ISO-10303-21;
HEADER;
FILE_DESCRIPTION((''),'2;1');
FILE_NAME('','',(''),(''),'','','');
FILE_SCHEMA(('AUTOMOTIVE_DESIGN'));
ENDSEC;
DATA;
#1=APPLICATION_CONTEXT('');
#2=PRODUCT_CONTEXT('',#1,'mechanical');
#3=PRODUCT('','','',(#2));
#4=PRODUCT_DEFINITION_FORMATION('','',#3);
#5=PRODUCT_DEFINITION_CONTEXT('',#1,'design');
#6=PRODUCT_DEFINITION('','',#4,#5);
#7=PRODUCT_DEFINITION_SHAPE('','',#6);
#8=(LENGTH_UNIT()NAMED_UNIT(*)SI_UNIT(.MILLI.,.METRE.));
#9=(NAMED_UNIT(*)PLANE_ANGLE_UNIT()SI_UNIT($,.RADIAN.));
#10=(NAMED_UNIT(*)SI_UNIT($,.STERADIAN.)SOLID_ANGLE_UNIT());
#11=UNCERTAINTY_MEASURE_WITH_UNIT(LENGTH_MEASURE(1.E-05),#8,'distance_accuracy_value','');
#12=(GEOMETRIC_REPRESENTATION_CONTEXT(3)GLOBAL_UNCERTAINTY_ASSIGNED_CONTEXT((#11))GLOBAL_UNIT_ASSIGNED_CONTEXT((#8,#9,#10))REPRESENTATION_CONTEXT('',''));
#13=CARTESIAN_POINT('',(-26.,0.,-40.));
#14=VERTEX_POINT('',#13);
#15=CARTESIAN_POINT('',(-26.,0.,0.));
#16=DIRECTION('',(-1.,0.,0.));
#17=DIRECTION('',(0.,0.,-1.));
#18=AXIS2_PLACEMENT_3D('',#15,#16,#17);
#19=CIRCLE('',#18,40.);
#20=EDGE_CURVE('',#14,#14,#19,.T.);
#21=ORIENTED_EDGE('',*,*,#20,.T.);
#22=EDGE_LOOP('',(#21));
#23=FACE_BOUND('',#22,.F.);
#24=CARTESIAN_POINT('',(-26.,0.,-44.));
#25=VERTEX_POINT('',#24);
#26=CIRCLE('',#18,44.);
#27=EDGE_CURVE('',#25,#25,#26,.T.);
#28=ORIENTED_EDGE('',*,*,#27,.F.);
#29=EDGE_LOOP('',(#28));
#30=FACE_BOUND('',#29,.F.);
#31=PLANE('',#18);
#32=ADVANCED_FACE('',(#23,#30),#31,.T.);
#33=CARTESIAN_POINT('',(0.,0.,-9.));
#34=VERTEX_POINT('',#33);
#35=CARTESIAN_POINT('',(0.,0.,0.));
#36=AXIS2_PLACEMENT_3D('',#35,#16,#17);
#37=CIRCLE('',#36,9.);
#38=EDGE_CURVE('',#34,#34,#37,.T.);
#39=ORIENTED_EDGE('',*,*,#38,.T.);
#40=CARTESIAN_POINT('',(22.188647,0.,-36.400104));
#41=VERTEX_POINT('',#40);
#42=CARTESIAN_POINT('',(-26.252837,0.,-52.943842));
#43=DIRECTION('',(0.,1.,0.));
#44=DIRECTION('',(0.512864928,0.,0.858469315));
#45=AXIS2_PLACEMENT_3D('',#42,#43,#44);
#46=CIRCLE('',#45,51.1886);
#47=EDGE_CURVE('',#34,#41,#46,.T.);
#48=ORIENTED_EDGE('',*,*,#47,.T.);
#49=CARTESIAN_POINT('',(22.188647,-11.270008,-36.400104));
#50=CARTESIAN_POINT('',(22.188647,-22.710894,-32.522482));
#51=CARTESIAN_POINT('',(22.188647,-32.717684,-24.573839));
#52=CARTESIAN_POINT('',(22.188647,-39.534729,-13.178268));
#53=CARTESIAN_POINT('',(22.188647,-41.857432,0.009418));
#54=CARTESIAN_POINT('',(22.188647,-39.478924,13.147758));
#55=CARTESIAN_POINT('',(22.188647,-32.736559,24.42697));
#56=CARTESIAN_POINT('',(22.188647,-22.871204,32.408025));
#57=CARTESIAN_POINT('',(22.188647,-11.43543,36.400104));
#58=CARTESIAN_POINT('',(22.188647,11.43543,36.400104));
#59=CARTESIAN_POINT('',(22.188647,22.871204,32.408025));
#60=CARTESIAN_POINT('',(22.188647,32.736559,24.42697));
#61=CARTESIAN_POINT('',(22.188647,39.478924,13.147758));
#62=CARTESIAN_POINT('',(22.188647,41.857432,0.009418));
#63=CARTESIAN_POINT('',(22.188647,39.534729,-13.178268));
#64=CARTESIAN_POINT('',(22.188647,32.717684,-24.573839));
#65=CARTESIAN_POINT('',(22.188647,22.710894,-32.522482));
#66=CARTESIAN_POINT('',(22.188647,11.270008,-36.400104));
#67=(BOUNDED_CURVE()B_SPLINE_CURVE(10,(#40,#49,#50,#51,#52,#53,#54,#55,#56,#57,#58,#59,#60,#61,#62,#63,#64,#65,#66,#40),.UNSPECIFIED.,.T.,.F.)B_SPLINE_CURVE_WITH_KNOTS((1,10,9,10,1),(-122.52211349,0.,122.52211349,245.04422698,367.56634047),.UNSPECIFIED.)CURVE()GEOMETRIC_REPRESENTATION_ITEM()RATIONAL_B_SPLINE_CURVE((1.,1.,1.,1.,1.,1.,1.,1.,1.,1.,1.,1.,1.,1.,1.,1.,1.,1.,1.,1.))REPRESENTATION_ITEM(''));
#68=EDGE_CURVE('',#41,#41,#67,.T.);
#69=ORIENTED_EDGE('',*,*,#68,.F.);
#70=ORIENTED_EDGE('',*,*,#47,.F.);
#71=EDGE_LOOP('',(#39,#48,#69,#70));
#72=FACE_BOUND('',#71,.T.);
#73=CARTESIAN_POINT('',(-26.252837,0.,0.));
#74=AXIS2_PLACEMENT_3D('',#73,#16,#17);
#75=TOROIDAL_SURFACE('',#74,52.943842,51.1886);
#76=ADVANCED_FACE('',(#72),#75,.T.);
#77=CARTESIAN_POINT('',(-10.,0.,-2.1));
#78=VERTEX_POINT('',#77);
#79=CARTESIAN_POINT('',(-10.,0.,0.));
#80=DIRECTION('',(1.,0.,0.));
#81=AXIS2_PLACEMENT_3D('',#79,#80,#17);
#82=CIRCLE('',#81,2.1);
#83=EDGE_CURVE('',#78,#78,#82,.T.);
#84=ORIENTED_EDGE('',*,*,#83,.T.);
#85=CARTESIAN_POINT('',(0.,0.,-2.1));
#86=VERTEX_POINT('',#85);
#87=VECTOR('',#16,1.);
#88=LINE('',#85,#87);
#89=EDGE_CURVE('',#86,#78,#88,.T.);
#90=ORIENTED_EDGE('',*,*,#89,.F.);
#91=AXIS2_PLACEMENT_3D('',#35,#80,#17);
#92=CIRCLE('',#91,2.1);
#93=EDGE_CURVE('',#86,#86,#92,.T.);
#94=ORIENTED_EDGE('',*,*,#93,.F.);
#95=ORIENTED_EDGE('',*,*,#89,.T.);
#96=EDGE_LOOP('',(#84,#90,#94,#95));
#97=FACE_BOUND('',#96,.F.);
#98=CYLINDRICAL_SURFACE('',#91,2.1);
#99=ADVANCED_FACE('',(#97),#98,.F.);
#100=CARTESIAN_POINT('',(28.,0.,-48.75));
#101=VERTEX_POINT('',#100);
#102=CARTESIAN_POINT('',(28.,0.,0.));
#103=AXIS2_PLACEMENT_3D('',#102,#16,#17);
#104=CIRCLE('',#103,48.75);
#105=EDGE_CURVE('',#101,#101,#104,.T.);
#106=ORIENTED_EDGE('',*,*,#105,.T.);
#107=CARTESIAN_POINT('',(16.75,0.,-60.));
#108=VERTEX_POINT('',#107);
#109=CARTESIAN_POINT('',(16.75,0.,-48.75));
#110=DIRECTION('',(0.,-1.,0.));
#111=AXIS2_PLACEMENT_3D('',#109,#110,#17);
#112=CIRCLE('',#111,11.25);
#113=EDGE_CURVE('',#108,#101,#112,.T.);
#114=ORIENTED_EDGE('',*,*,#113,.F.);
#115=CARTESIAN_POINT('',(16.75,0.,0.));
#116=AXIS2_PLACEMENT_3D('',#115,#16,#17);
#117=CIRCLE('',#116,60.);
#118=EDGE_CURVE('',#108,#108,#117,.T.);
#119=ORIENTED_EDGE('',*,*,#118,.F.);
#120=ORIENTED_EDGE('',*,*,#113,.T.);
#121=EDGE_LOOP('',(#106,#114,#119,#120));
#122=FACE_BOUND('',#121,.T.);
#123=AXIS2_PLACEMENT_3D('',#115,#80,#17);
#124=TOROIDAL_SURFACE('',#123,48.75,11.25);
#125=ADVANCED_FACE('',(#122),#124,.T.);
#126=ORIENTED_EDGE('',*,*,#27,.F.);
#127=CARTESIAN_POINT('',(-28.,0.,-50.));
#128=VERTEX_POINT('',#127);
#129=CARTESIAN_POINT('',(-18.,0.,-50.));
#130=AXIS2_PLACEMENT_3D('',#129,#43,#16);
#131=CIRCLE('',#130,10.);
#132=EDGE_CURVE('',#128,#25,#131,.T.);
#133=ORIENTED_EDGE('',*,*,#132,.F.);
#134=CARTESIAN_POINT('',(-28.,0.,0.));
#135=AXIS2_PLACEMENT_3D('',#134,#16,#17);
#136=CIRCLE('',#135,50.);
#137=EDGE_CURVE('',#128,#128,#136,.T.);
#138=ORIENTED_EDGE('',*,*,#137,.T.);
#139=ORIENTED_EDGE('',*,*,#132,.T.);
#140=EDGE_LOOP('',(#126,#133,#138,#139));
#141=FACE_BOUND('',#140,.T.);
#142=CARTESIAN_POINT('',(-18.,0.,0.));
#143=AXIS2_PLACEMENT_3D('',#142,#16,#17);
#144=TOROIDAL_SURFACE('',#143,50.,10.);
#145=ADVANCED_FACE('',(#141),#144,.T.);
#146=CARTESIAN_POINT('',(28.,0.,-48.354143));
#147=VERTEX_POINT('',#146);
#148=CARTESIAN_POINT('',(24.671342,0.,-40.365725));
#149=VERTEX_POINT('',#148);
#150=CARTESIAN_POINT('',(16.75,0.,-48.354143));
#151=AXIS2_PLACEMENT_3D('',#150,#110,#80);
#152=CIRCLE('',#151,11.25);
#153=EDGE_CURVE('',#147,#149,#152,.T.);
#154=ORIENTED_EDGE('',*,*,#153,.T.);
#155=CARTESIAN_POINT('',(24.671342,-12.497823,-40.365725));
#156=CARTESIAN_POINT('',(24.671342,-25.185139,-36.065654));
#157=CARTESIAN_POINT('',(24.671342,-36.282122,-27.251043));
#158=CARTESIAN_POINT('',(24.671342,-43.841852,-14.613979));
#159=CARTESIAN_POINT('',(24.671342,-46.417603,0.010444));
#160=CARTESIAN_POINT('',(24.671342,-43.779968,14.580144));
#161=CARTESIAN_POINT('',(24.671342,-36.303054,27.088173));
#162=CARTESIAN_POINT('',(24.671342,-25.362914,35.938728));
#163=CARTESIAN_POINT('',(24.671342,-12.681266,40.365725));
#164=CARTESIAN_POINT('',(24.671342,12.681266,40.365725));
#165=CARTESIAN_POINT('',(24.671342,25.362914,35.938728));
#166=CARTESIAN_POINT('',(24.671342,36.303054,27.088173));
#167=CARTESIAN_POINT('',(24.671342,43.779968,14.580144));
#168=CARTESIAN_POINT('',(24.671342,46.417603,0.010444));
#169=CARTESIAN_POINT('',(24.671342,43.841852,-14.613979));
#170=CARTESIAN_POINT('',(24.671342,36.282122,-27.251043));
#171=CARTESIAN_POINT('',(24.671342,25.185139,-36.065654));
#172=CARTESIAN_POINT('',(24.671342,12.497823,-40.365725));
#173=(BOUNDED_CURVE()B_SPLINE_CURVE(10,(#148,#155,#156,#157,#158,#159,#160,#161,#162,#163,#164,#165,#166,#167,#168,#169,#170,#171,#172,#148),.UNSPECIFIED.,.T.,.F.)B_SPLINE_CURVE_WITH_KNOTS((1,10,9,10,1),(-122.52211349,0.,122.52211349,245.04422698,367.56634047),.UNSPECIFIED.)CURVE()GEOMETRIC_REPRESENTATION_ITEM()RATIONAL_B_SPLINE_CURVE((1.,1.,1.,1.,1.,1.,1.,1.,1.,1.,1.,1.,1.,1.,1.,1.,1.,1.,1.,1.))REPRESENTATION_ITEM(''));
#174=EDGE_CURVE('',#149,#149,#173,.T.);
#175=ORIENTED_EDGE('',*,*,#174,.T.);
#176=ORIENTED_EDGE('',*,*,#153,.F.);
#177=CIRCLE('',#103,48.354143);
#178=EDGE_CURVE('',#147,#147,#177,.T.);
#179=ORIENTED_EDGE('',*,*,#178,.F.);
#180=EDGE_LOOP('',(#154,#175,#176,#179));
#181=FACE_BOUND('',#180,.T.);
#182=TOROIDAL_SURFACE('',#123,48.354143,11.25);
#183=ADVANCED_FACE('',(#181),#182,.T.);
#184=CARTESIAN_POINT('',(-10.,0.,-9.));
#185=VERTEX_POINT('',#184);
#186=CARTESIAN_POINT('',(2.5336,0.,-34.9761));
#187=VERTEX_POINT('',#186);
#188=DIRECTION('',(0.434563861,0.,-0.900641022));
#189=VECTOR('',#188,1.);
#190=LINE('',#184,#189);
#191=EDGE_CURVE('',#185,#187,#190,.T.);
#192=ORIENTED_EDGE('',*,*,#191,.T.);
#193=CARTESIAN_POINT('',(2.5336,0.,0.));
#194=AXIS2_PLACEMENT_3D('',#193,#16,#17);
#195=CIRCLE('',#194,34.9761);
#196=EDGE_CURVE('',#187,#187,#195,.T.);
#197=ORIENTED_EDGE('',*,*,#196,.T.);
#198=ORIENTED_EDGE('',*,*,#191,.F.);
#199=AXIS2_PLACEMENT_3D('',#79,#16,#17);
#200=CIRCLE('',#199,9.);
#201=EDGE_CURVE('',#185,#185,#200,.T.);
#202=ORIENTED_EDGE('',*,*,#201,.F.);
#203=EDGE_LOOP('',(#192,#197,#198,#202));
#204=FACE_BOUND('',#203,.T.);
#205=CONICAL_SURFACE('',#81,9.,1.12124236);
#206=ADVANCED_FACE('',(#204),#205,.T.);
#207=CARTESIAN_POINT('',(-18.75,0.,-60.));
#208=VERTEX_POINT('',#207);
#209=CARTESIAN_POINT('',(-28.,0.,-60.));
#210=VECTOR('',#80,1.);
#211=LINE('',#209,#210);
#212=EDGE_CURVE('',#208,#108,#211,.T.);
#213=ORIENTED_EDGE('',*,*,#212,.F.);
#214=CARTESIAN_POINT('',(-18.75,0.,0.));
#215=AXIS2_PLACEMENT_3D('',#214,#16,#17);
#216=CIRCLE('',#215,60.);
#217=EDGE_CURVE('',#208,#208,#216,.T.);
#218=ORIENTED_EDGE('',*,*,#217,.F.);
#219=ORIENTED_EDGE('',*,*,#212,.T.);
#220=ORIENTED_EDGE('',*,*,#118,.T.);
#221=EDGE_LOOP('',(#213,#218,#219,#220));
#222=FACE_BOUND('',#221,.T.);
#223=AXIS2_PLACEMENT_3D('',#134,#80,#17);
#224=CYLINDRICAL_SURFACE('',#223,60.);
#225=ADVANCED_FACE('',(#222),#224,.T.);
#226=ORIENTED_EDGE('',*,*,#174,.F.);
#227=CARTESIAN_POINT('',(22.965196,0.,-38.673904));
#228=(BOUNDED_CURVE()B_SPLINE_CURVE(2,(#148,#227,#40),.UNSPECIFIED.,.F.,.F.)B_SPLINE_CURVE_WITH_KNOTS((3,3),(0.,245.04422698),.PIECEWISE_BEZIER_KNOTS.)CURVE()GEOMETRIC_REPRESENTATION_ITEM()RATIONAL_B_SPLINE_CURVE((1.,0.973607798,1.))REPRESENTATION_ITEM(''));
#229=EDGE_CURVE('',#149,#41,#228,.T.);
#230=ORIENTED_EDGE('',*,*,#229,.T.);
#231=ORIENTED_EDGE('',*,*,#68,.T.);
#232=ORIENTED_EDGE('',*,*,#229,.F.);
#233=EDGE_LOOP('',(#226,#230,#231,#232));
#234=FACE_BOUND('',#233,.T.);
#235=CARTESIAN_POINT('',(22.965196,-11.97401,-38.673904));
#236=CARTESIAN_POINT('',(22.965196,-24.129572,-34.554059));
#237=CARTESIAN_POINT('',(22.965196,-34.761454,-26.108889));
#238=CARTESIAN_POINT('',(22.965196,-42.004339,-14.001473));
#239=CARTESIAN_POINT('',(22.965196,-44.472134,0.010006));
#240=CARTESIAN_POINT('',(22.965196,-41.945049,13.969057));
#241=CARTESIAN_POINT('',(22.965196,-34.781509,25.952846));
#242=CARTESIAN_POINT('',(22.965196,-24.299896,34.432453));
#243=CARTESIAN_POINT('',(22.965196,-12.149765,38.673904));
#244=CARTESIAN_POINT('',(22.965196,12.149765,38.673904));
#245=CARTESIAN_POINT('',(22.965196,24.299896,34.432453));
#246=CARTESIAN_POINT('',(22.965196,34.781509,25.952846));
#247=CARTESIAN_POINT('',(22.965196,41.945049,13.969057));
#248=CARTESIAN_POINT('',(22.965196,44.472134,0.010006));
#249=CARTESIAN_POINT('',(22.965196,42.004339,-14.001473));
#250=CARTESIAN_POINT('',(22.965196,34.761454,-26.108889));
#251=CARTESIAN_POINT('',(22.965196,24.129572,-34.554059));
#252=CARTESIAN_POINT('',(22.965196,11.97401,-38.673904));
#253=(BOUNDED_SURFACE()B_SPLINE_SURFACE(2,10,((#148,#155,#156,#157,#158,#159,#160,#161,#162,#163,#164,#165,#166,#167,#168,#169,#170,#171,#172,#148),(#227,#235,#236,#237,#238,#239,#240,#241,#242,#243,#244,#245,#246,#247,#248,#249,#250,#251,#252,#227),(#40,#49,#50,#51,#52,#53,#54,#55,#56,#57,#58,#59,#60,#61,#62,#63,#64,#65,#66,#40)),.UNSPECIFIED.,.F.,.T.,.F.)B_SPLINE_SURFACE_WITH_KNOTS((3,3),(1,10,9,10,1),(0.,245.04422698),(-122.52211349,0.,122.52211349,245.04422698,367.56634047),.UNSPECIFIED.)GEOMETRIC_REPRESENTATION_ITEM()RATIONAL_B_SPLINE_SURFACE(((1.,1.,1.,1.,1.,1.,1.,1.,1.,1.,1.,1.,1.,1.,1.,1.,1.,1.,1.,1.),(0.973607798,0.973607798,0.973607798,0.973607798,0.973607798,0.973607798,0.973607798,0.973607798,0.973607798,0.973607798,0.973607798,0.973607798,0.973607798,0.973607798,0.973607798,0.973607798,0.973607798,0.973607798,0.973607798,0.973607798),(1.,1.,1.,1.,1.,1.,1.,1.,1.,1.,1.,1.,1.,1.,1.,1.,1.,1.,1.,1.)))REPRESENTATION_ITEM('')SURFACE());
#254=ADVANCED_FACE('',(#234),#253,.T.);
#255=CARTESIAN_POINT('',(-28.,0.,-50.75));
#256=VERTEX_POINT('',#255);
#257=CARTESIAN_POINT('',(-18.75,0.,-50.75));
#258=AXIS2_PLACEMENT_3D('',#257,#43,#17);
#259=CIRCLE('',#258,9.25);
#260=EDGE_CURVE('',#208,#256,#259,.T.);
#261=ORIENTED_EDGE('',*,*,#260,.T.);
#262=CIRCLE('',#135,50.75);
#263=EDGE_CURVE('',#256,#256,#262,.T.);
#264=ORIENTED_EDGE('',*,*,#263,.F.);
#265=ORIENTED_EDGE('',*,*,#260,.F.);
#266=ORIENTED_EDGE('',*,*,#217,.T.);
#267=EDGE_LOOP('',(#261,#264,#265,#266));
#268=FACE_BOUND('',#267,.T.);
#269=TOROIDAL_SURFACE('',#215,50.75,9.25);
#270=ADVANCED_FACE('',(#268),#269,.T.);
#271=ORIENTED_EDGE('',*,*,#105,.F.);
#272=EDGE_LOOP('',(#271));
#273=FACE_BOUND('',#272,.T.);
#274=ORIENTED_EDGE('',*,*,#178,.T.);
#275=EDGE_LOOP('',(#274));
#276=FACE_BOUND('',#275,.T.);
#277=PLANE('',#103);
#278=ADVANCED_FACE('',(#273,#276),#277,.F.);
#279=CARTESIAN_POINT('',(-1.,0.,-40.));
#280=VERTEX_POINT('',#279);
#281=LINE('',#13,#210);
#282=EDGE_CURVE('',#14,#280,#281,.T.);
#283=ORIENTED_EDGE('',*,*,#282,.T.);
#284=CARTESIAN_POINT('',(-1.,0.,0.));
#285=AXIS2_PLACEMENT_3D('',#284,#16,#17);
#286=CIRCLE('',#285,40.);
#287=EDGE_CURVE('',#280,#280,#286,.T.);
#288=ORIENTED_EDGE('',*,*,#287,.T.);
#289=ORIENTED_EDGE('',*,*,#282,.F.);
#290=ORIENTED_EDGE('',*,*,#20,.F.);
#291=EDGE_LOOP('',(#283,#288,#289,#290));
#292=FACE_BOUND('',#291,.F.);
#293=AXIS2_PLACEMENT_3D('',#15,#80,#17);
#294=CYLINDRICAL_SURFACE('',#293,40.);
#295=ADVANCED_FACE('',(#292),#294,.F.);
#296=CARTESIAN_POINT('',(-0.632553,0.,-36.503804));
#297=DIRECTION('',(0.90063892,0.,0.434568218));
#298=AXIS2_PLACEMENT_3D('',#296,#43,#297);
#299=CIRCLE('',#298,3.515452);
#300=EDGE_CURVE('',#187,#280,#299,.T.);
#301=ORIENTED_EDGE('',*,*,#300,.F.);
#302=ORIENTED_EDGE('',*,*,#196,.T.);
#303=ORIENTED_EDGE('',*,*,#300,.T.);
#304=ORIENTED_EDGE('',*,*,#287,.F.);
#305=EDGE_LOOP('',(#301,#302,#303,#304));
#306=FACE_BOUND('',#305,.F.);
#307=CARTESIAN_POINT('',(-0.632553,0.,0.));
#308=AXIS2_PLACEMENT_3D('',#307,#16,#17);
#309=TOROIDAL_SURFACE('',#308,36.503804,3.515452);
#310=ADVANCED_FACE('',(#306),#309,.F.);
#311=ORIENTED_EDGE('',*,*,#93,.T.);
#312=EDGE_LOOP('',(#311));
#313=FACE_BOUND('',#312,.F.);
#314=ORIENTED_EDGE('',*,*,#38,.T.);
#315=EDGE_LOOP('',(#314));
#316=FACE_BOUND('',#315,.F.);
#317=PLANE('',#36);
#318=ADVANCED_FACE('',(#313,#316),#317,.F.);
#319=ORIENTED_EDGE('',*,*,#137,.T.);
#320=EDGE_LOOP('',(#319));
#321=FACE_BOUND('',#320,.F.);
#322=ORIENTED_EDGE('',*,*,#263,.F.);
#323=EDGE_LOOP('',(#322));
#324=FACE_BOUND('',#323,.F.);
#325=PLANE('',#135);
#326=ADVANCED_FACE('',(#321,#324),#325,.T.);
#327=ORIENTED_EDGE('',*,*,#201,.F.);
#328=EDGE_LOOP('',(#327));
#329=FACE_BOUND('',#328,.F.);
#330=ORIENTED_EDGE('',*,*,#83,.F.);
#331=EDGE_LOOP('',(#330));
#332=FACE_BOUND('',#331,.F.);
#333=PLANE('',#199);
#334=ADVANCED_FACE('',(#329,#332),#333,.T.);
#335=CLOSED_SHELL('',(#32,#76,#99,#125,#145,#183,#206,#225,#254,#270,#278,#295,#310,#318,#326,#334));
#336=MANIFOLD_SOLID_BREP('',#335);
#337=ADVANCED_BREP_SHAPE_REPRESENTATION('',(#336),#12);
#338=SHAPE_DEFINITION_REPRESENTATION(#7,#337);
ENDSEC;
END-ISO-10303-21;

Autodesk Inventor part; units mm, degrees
ref_plane "YZ Plane" through (0, 0, 0) normal (1, 0, 0) x (0, 1, 0)
ref_plane "XZ Plane" through (0, 0, 0) normal (0, 1, 0) x (-1, 0, 0)
ref_plane "XY Plane" through (0, 0, 0) normal (0, 0, 1) x (1, 0, 0)
sketch "Sketch1" plane through (0, 0, 0) normal (0, 1, 0) x (-1, 0, 0)
  line L0 (28, -60) -> (-28, -60)
  line L1 (10, 0) -> (10, -9)
  line L2 (10, -9) -> (-2.5336, -34.9761)
  arc A0 (-2.5336, -34.9761) -> (1, -40) centre (0.6326, -36.5038) ccw
  line L3 (26, -40) -> (26, -44)
  line L4 (26, -44) -> (28, -44)
  line L5 (28, -44) -> (28, -60)
  line L6 (26, -40) -> (1, -40)
  line L7 (-28, -39) -> (-23, -39)
  arc A1 (0, -9) -> (-23, -39) centre (26.2528, -52.9438) ccw
  line L8 (-28, -39) -> (-28, -60)
  line L9 (10, 0) -> (0, 0)
  line L10 (0, -9) -> (0, 0)
  line L11 (0, 0) -> (10, 0)
  line L12 (10, -9) -> (10, 0)
  line L13 (0, 0) -> (10, 0)
  line L14 (0, 0) -> (0, -9)
  dimension "d9" = 4
  dimension "d12" = 5
revolve "Revolution1" add sketch "Sketch1" angle 360 about axis through (0, 0, 0) along (-1, 0, 0)
sketch "Sketch2" plane through (0, 0, 0) normal (1, 0, 0) x (0, 0, -1)
  circle A0 centre (0, 0) radius 2.1
  dimension "d16" = 4.2
extrude "Extrusion1" cut sketch "Sketch2" against normal blind 10
fillet "Fillet1" radius 10 1 edges at (-28, 0, 44)
fillet "Fillet2" radius 9.25 1 edges at (-28, 0, 60)
fillet "Fillet3" radius 11.25 2 edges at (28, 0, 39) (28, 0, 60)
fillet "Fillet4" radius 10.25 1 edges at (23, 0, 39)
properties part number "kolo"
